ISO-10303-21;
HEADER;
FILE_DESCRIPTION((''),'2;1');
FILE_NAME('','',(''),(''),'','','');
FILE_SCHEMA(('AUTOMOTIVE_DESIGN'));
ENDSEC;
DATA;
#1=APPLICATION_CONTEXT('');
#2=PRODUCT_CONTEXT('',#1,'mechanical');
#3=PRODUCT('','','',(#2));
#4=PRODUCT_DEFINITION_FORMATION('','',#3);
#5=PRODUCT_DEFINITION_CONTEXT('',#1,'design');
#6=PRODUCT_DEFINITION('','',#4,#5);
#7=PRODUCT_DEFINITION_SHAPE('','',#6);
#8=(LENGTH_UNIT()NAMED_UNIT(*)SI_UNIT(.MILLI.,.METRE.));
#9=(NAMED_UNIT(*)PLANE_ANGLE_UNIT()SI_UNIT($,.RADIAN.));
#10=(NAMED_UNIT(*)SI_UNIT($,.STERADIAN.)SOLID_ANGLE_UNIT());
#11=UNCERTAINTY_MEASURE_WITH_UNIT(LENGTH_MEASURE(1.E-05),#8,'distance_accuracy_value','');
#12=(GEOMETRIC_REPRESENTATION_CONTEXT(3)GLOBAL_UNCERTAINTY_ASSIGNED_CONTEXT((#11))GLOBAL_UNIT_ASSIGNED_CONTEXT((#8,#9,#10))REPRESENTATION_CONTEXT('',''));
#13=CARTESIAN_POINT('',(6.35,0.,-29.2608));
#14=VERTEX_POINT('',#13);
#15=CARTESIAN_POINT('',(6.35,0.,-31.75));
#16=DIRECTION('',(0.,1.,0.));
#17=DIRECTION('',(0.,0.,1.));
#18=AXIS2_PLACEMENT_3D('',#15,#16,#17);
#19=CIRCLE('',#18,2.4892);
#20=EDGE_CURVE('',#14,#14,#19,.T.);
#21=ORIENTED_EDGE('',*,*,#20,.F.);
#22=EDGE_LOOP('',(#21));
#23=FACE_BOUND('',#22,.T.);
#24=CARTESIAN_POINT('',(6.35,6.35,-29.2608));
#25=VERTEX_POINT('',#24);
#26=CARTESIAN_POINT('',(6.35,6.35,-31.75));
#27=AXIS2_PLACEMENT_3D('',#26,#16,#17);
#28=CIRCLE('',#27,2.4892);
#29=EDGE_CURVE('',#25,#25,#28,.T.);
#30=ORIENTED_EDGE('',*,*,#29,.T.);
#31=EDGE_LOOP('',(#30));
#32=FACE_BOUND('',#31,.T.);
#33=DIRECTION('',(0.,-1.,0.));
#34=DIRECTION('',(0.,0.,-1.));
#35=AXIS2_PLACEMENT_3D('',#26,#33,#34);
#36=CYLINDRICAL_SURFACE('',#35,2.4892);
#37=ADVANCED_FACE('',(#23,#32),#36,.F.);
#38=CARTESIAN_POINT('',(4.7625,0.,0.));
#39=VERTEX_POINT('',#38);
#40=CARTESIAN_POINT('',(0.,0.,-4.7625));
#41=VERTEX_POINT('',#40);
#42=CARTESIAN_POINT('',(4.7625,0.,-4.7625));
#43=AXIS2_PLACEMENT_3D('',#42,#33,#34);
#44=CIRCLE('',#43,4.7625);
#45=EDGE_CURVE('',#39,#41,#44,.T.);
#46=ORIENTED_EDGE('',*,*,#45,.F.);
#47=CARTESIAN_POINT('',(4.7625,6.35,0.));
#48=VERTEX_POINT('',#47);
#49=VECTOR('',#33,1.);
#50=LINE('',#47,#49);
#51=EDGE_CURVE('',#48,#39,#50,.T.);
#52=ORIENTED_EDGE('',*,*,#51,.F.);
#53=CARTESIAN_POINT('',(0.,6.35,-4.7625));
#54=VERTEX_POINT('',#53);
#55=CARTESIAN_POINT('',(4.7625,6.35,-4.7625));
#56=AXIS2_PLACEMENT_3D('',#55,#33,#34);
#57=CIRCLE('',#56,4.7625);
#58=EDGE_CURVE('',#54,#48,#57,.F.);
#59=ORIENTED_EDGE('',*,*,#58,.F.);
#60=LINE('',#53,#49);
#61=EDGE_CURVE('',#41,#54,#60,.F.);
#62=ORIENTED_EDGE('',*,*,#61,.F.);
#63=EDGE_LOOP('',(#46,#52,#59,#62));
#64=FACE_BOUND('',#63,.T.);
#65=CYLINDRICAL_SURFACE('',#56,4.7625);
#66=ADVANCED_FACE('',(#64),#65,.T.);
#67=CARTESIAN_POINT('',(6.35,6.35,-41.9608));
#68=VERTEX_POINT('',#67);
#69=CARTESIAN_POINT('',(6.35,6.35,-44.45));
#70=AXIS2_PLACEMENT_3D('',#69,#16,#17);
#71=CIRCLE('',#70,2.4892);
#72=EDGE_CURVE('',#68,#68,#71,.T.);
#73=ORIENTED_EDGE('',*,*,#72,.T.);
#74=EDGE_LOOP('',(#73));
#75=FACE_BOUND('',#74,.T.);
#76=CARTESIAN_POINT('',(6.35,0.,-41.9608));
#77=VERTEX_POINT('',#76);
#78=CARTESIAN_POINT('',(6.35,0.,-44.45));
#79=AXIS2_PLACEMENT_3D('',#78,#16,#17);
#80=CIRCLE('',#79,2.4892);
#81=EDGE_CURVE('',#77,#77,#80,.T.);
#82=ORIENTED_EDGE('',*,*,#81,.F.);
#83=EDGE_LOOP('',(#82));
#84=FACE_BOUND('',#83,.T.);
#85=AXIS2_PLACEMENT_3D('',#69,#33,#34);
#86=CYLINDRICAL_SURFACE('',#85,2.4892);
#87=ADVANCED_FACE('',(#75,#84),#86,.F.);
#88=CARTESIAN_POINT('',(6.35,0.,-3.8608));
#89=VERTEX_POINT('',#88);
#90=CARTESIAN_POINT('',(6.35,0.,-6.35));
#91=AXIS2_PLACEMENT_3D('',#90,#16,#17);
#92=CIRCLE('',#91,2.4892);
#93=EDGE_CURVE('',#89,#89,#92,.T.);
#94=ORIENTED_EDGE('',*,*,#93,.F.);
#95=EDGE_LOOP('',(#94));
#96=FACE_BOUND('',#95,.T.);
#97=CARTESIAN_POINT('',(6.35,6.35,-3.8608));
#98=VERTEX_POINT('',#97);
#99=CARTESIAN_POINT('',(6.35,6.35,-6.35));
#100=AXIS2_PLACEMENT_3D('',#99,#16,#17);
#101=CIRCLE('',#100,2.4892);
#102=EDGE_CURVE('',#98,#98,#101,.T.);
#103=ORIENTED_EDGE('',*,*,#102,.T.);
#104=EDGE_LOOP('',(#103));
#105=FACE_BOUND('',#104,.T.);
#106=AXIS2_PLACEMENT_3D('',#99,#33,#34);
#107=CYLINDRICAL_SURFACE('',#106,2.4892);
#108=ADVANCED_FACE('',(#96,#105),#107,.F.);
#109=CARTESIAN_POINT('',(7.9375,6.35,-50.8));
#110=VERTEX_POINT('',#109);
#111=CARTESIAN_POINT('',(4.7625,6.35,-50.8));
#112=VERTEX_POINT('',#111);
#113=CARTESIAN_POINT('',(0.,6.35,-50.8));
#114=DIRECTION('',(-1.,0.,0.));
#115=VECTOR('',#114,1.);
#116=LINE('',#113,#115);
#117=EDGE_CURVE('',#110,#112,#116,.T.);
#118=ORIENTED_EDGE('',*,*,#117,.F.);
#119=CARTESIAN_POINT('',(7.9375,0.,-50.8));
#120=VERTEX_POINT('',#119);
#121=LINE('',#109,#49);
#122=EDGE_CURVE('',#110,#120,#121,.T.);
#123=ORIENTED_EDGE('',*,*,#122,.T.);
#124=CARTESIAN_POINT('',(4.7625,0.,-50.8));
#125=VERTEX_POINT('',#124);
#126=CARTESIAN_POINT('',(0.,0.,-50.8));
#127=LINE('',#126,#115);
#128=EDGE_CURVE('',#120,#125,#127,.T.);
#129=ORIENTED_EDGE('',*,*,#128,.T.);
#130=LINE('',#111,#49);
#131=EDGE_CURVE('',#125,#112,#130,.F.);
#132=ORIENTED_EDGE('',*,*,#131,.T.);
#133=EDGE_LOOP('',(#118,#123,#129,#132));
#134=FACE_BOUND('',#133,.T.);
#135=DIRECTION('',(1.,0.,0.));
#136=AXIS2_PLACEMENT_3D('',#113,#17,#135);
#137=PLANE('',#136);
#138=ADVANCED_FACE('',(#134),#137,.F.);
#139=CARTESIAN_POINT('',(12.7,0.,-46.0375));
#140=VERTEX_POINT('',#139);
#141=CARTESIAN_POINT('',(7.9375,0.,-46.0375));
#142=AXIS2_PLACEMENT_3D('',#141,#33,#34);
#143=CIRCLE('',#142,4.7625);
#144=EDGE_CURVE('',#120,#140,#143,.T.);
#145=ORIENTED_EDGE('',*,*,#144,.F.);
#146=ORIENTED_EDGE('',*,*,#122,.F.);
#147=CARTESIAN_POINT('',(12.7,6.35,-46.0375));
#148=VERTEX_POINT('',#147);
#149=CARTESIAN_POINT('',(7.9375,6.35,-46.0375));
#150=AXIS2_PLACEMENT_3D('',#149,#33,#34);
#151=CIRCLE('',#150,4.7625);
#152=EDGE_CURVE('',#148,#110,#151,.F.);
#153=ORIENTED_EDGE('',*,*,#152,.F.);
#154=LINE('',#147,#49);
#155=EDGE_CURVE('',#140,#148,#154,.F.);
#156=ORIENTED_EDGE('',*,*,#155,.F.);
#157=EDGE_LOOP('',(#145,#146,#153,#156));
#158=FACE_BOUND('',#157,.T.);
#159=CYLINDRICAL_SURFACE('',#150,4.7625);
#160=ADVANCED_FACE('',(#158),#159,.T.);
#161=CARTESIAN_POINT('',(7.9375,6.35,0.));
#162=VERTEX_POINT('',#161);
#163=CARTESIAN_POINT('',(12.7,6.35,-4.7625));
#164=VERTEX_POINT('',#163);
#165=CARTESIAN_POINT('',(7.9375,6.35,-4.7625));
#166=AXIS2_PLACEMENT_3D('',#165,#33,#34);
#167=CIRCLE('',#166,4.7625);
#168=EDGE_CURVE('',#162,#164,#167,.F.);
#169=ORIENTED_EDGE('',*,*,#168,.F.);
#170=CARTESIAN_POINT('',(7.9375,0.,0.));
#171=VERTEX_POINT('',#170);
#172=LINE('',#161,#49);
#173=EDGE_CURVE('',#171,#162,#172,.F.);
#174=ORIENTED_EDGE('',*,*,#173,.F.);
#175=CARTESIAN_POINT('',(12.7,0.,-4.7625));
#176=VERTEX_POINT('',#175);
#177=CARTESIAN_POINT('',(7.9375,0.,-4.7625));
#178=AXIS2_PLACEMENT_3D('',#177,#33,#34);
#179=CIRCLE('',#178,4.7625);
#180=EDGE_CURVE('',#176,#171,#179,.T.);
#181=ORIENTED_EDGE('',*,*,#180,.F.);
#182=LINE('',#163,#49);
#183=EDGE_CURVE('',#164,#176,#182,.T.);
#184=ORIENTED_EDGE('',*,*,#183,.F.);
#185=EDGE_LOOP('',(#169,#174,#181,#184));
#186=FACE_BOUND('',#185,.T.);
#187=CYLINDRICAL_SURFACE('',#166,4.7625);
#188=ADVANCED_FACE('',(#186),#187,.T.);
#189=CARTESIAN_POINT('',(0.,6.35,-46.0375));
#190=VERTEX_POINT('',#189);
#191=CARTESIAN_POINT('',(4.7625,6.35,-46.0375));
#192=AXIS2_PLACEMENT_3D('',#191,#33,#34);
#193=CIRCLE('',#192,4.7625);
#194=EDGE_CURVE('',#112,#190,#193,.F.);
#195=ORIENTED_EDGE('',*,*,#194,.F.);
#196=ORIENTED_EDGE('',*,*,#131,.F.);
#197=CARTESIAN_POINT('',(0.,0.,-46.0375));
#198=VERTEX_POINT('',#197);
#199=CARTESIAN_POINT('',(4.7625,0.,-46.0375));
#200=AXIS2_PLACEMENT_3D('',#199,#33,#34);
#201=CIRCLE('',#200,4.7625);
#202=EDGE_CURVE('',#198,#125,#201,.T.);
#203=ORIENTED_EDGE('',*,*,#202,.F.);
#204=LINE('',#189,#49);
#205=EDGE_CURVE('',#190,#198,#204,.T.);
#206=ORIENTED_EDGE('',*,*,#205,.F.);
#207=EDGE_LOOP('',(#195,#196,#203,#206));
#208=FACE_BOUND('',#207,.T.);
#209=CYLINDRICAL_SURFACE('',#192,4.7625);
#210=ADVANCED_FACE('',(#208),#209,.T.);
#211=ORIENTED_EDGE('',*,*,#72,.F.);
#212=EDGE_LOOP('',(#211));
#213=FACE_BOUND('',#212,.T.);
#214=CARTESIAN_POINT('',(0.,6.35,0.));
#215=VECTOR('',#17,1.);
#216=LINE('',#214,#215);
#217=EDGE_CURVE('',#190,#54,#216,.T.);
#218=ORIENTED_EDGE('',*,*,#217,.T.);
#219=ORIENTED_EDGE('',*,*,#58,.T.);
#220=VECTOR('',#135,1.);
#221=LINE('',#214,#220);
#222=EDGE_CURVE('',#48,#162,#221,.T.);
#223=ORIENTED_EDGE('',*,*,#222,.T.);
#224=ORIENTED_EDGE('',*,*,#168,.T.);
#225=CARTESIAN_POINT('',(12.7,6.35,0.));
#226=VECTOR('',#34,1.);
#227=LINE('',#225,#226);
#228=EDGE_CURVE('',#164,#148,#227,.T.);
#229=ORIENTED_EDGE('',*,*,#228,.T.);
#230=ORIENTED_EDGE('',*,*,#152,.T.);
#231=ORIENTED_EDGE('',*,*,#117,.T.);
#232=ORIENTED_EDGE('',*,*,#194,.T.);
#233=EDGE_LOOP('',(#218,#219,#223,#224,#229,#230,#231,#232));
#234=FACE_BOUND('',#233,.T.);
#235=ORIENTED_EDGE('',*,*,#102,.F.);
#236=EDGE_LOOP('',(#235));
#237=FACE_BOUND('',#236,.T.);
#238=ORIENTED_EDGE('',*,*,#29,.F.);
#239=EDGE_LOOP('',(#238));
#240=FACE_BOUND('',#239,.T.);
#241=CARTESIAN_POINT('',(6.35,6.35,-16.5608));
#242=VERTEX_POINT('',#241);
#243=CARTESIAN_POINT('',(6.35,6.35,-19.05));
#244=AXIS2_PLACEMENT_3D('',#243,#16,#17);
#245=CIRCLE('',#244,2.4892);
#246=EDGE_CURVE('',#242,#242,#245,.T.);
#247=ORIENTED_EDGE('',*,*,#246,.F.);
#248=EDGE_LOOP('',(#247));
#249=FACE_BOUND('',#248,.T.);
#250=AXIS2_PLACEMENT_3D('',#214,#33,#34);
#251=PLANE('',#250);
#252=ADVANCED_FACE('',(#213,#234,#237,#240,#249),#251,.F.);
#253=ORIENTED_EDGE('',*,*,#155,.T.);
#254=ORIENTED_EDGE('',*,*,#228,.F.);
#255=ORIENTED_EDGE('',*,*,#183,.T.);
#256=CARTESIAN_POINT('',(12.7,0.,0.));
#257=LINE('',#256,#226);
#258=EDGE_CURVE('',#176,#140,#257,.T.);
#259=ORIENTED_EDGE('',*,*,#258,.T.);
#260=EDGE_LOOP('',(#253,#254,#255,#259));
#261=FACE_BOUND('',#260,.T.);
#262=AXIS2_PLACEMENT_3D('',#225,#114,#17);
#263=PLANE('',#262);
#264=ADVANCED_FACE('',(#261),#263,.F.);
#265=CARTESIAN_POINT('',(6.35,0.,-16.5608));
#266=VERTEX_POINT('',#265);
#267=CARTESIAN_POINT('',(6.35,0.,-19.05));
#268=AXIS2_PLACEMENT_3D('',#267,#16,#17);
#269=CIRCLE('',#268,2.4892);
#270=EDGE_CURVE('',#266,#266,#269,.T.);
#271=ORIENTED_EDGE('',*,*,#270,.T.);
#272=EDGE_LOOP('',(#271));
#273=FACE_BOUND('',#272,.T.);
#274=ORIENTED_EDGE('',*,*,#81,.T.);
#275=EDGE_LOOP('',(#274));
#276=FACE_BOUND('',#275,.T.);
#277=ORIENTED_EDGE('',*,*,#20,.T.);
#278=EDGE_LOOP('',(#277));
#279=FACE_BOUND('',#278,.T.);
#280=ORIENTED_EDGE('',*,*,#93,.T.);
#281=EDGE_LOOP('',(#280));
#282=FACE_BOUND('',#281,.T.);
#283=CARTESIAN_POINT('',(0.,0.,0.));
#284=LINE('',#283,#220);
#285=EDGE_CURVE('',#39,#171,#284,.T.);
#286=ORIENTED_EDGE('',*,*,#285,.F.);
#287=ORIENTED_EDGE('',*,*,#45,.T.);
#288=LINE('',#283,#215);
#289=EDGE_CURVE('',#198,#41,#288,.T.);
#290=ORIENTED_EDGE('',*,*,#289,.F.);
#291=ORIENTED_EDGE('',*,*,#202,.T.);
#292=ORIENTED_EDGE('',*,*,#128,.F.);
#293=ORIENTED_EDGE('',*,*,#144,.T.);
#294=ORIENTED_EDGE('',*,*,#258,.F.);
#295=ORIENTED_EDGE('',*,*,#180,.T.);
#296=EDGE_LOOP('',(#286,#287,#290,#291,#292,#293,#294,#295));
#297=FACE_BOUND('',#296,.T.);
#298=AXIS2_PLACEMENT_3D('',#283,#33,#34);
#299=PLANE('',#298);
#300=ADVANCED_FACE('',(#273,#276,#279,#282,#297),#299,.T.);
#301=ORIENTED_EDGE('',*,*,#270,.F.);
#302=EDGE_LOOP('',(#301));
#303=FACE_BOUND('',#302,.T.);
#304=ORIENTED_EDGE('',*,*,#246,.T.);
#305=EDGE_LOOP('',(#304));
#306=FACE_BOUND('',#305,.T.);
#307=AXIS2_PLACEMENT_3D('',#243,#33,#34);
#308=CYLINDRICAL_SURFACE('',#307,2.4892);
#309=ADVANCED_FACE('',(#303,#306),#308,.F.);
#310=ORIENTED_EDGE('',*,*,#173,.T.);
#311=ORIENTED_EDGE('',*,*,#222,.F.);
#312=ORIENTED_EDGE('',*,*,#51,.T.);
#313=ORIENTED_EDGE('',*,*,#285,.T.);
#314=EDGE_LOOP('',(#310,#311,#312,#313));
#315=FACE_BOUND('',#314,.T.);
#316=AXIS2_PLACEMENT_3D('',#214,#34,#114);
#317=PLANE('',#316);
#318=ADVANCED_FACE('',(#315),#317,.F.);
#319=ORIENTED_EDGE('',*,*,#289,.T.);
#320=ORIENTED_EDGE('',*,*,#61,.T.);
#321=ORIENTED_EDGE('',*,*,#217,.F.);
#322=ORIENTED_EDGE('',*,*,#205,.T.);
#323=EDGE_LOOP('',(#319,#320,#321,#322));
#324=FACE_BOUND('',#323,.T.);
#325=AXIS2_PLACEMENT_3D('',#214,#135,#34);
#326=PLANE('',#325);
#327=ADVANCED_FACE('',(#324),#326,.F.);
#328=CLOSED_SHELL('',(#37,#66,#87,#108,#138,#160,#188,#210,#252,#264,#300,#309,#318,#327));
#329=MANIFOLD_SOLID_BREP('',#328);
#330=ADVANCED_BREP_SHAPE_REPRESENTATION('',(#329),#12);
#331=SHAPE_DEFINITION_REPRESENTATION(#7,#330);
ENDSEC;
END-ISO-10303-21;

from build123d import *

# Parameters (mm, degrees)
SKETCH1_W           = 12.7
SKETCH1_H           = 50.8
SKETCH1_R           = 2.4892
BOSS_EXTRUDE1_DEPTH = 6.35
LPATTERN1_OUTLINE_R = 2.4892
LPATTERN1_DEPTH     = 6.35
FILLET1_R           = 4.7625


# Read off the part's stored shape, not the designer's step: LPattern1
with BuildPart() as part:
    # Sketch1 → Boss-Extrude1 (new body)
    with BuildSketch(Plane(origin=(0, 0, 0), x_dir=(1, 0, 0), z_dir=(0, 1, 0))):
        with Locations((6.35, 25.4)):
            Rectangle(SKETCH1_W, SKETCH1_H)
        with Locations(Location((6.35, 6.35, 0), (0, 0, 270))):
            Circle(SKETCH1_R, mode=Mode.SUBTRACT)
    extrude(amount=BOSS_EXTRUDE1_DEPTH)

    # LPattern1 outline → LPattern1 (cut)
    with BuildSketch(Plane(origin=(0, 0, 0), x_dir=(1, 0, 0), z_dir=(0, 1, 0))):
        with Locations((6.35, 44.45)):
            Circle(LPATTERN1_OUTLINE_R)
        with Locations((6.35, 31.75)):
            Circle(LPATTERN1_OUTLINE_R)
        with Locations((6.35, 19.05)):
            Circle(LPATTERN1_OUTLINE_R)
    extrude(amount=LPATTERN1_DEPTH, mode=Mode.SUBTRACT)

    # Fillet1
    fillet1_edges = [part.edges().sort_by_distance(p)[0] for p in [
        (0, 3.175, -50.8),
        (12.7, 3.175, -50.8),
        (12.7, 3.175, 0),
        (0, 3.175, 0),
    ]]
    fillet(fillet1_edges, radius=FILLET1_R)


solid = part.part
